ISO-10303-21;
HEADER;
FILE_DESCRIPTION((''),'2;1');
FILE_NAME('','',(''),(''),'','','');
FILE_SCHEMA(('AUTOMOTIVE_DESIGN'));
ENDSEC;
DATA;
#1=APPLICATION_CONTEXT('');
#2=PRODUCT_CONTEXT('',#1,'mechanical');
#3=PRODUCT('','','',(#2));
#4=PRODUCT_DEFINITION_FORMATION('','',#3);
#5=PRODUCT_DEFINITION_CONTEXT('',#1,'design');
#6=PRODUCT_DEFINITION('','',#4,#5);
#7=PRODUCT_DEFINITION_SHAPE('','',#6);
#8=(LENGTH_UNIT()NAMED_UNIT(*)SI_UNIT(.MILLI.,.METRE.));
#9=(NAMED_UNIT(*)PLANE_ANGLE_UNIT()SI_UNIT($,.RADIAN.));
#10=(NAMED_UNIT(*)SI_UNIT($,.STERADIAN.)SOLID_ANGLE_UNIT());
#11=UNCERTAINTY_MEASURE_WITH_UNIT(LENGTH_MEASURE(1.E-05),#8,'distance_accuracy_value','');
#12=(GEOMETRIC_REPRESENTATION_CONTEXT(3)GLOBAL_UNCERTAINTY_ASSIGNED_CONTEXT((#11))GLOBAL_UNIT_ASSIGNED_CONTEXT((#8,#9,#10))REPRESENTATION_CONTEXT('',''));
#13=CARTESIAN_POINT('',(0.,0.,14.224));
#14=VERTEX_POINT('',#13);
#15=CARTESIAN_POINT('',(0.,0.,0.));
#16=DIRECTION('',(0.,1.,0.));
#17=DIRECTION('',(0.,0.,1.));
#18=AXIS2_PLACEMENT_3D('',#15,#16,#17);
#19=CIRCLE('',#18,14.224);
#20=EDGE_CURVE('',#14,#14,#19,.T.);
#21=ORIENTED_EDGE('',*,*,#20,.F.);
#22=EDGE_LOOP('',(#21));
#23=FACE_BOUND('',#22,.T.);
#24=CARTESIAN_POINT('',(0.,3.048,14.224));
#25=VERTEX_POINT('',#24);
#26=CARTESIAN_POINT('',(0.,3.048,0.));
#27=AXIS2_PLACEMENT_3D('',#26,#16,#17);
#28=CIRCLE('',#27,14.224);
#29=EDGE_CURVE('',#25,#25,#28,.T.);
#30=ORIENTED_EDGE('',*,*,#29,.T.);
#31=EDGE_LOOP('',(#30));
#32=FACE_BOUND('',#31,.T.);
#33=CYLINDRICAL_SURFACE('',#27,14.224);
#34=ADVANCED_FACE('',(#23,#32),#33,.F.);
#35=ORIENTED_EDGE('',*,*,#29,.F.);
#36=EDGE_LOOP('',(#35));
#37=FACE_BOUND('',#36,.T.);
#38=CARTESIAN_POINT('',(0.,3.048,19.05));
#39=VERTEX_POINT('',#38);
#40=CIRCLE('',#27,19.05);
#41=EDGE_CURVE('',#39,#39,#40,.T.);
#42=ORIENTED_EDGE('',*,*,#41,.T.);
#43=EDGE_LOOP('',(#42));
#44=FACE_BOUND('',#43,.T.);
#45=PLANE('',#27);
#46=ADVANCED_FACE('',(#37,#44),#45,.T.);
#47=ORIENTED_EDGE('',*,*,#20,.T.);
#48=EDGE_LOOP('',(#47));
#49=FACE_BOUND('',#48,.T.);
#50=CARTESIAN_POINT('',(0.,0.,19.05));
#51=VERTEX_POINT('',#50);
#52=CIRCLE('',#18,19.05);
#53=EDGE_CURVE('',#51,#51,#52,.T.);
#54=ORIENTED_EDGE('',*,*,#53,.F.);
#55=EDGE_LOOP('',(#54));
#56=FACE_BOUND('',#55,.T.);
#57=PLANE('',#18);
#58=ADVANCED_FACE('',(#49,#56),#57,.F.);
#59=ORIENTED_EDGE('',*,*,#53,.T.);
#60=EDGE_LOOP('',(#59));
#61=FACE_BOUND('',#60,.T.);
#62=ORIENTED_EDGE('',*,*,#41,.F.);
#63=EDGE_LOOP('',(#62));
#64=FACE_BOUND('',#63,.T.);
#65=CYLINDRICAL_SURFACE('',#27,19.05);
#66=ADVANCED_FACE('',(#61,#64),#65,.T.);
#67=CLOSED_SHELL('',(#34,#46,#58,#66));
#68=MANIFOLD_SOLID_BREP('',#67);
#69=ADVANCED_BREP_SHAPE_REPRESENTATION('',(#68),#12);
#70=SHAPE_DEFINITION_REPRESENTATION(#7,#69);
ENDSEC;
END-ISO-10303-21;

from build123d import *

# Parameters (mm, degrees)
SKETCH1_R           = 19.05
BOSS_EXTRUDE1_DEPTH = 3.048
SKETCH2_R           = 14.224
CUT_EXTRUDE1_DEPTH  = 28.112641037


with BuildPart() as part:
    # Sketch1 → Boss-Extrude1 (new body)
    with BuildSketch(Plane(origin=(0, 0, 0), x_dir=(1, 0, 0), z_dir=(0, 1, 0))):
        with Locations(Location((0, 0, 0), (0, 0, 90))):
            Circle(SKETCH1_R)
    extrude(amount=BOSS_EXTRUDE1_DEPTH)

    # Sketch2 → Cut-Extrude1 (cut, through all)
    with BuildSketch(Plane(origin=(0, 3.048, 0), x_dir=(1, 0, 0), z_dir=(0, 1, 0))):
        with Locations(Location((0, 0, 0), (0, 0, 270))):
            Circle(SKETCH2_R)
    extrude(amount=-CUT_EXTRUDE1_DEPTH, mode=Mode.SUBTRACT)


solid = part.part
